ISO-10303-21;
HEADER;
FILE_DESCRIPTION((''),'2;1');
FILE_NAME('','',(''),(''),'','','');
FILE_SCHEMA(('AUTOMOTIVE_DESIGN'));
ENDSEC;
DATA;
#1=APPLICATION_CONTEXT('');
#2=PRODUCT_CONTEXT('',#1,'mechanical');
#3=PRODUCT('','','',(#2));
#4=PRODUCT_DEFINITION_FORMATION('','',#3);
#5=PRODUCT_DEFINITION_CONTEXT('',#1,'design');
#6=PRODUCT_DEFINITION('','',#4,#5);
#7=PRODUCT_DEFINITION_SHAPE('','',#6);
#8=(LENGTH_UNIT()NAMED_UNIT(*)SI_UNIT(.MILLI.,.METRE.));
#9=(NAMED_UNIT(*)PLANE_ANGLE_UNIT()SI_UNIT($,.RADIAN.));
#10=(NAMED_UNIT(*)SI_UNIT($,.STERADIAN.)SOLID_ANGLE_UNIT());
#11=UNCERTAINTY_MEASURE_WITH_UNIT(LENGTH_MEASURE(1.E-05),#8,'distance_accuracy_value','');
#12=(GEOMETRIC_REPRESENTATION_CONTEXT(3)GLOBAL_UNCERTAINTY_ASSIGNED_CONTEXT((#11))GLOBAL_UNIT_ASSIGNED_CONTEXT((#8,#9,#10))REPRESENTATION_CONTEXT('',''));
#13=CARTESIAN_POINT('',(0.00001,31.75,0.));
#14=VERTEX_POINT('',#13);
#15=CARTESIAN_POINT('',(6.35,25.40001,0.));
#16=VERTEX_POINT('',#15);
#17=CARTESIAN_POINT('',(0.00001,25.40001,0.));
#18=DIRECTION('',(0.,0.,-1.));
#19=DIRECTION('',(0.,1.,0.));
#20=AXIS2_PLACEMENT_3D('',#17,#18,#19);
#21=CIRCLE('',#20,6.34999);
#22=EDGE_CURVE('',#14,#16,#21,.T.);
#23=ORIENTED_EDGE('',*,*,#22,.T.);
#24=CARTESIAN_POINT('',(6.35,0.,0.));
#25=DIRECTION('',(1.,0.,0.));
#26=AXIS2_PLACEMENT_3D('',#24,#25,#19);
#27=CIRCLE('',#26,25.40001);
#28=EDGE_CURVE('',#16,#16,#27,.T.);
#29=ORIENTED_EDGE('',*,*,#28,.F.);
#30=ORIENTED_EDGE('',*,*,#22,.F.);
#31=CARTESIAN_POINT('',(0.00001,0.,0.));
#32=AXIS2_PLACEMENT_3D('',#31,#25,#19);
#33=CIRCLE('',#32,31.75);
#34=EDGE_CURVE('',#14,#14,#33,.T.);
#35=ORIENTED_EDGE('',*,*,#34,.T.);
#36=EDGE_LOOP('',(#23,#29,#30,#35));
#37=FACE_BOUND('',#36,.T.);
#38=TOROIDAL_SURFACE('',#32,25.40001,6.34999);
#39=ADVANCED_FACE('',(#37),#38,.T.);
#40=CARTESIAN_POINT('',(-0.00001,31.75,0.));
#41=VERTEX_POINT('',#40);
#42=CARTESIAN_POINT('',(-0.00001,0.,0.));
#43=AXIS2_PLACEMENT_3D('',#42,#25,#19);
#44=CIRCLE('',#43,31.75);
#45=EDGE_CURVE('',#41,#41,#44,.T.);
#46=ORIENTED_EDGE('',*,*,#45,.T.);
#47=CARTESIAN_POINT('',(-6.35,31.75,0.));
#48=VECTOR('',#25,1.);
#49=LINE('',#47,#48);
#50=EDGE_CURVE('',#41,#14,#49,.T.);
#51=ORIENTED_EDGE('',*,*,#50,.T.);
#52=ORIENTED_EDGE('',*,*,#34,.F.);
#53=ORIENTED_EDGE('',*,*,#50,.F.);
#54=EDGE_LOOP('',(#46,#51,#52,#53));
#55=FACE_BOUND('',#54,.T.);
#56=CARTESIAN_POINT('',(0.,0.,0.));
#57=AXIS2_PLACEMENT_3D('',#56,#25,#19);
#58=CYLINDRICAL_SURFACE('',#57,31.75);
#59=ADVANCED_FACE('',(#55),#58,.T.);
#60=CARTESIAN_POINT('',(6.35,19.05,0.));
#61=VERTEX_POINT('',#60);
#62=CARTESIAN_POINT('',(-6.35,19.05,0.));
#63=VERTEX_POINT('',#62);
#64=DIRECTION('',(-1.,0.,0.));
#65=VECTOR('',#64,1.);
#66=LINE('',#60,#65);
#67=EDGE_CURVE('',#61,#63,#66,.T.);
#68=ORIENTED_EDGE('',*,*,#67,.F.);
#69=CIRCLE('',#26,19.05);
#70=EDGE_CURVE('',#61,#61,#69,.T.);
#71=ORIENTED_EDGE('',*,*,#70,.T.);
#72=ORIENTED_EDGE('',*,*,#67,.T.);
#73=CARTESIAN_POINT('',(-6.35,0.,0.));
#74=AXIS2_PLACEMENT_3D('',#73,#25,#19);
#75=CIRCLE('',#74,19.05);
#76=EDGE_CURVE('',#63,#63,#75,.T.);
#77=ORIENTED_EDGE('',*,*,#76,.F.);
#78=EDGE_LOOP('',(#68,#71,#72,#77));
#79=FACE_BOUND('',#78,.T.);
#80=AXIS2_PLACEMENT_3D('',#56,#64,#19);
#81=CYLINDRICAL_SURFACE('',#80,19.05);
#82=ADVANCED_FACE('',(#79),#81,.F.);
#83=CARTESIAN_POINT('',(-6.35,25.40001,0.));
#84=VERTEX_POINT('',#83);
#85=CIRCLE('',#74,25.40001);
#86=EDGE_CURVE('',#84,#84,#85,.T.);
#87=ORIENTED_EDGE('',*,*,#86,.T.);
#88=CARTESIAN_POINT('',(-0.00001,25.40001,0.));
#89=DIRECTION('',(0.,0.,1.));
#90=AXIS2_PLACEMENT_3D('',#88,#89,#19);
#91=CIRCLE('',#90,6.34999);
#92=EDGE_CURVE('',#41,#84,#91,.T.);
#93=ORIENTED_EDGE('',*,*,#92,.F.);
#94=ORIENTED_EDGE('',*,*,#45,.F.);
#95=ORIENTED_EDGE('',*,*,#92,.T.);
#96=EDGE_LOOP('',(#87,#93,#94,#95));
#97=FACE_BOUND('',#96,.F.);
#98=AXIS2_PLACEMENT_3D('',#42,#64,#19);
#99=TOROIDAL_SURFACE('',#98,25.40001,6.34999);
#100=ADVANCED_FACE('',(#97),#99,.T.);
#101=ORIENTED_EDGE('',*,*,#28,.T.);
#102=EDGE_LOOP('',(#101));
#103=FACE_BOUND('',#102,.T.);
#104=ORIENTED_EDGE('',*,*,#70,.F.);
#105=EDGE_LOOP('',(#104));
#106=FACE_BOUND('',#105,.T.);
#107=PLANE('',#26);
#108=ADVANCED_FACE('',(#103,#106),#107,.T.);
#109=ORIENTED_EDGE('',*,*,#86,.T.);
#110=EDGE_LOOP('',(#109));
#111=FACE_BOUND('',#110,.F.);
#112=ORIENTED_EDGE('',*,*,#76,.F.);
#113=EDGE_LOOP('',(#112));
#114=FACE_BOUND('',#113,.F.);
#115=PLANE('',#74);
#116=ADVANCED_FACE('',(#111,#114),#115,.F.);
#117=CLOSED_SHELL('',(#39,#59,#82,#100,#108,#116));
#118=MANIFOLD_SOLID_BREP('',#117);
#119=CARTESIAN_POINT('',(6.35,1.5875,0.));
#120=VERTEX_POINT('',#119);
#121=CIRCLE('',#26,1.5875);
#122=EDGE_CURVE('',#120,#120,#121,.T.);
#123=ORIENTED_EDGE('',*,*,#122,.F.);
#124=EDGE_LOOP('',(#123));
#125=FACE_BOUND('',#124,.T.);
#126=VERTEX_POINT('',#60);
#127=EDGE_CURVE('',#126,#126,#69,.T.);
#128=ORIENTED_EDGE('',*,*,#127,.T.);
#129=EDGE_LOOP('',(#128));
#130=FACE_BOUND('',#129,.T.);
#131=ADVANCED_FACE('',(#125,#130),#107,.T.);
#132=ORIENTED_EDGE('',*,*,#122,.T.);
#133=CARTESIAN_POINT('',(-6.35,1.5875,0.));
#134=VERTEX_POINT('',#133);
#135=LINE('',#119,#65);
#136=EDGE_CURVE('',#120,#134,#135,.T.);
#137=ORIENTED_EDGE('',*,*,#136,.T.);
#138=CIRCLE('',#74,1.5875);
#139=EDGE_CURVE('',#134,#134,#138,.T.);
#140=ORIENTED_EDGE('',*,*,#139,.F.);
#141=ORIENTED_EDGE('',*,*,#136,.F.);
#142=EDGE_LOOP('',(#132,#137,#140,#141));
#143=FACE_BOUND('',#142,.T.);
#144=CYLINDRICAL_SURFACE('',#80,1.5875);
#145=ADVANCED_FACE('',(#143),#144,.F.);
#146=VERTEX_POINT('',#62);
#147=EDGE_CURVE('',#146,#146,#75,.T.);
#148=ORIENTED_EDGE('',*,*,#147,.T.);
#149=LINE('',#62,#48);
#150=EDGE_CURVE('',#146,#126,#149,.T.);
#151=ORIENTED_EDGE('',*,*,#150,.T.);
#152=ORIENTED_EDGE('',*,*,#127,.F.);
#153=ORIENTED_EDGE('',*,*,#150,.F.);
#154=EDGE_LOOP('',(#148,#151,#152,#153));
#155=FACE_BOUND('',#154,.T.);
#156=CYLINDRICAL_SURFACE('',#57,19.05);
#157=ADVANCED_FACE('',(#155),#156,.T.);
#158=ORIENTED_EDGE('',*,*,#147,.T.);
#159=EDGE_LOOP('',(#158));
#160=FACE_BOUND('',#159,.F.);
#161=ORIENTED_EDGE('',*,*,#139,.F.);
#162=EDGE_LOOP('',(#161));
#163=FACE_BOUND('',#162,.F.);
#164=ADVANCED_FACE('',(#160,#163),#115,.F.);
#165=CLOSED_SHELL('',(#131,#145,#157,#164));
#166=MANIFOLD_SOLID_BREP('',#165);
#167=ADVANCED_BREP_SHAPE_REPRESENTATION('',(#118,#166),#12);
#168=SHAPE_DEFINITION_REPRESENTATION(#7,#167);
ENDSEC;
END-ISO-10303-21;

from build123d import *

# Parameters (mm, degrees)
F0_R     = 19.05
F0_R_2   = 1.5875
F1_DEPTH = 6.35
F0_R_3   = 31.75
F2_DEPTH = 6.35
F3_R     = 6.34999


# Not quite as in the source:
# - a fillet or chamfer is up to 0.001 mm smaller than in the source, because OpenCascade refuses the exact size


with BuildPart() as f1:
    # F0 (on Right) → F1 (new body, symmetric)
    with BuildSketch(Plane.YZ):
        Circle(F0_R)
        Circle(F0_R_2, mode=Mode.SUBTRACT)
    extrude(amount=F1_DEPTH, both=True)


with BuildPart() as f2:
    # F0 (on Right) → F2 (new body, symmetric)
    with BuildSketch(Plane.YZ):
        Circle(F0_R_3)
        Circle(F0_R, mode=Mode.SUBTRACT)
    extrude(amount=F2_DEPTH, both=True)

    # F3 (radius 6.35 in the source; OpenCascade refuses exactly that, so slightly less here)
    f3_edges = [f2.edges().sort_by_distance(p)[0] for p in [
        (6.35, -31.75, 0),
        (-6.35, -31.75, 0),
    ]]
    fillet(f3_edges, radius=F3_R)


solid = Compound([f1.part, f2.part])
